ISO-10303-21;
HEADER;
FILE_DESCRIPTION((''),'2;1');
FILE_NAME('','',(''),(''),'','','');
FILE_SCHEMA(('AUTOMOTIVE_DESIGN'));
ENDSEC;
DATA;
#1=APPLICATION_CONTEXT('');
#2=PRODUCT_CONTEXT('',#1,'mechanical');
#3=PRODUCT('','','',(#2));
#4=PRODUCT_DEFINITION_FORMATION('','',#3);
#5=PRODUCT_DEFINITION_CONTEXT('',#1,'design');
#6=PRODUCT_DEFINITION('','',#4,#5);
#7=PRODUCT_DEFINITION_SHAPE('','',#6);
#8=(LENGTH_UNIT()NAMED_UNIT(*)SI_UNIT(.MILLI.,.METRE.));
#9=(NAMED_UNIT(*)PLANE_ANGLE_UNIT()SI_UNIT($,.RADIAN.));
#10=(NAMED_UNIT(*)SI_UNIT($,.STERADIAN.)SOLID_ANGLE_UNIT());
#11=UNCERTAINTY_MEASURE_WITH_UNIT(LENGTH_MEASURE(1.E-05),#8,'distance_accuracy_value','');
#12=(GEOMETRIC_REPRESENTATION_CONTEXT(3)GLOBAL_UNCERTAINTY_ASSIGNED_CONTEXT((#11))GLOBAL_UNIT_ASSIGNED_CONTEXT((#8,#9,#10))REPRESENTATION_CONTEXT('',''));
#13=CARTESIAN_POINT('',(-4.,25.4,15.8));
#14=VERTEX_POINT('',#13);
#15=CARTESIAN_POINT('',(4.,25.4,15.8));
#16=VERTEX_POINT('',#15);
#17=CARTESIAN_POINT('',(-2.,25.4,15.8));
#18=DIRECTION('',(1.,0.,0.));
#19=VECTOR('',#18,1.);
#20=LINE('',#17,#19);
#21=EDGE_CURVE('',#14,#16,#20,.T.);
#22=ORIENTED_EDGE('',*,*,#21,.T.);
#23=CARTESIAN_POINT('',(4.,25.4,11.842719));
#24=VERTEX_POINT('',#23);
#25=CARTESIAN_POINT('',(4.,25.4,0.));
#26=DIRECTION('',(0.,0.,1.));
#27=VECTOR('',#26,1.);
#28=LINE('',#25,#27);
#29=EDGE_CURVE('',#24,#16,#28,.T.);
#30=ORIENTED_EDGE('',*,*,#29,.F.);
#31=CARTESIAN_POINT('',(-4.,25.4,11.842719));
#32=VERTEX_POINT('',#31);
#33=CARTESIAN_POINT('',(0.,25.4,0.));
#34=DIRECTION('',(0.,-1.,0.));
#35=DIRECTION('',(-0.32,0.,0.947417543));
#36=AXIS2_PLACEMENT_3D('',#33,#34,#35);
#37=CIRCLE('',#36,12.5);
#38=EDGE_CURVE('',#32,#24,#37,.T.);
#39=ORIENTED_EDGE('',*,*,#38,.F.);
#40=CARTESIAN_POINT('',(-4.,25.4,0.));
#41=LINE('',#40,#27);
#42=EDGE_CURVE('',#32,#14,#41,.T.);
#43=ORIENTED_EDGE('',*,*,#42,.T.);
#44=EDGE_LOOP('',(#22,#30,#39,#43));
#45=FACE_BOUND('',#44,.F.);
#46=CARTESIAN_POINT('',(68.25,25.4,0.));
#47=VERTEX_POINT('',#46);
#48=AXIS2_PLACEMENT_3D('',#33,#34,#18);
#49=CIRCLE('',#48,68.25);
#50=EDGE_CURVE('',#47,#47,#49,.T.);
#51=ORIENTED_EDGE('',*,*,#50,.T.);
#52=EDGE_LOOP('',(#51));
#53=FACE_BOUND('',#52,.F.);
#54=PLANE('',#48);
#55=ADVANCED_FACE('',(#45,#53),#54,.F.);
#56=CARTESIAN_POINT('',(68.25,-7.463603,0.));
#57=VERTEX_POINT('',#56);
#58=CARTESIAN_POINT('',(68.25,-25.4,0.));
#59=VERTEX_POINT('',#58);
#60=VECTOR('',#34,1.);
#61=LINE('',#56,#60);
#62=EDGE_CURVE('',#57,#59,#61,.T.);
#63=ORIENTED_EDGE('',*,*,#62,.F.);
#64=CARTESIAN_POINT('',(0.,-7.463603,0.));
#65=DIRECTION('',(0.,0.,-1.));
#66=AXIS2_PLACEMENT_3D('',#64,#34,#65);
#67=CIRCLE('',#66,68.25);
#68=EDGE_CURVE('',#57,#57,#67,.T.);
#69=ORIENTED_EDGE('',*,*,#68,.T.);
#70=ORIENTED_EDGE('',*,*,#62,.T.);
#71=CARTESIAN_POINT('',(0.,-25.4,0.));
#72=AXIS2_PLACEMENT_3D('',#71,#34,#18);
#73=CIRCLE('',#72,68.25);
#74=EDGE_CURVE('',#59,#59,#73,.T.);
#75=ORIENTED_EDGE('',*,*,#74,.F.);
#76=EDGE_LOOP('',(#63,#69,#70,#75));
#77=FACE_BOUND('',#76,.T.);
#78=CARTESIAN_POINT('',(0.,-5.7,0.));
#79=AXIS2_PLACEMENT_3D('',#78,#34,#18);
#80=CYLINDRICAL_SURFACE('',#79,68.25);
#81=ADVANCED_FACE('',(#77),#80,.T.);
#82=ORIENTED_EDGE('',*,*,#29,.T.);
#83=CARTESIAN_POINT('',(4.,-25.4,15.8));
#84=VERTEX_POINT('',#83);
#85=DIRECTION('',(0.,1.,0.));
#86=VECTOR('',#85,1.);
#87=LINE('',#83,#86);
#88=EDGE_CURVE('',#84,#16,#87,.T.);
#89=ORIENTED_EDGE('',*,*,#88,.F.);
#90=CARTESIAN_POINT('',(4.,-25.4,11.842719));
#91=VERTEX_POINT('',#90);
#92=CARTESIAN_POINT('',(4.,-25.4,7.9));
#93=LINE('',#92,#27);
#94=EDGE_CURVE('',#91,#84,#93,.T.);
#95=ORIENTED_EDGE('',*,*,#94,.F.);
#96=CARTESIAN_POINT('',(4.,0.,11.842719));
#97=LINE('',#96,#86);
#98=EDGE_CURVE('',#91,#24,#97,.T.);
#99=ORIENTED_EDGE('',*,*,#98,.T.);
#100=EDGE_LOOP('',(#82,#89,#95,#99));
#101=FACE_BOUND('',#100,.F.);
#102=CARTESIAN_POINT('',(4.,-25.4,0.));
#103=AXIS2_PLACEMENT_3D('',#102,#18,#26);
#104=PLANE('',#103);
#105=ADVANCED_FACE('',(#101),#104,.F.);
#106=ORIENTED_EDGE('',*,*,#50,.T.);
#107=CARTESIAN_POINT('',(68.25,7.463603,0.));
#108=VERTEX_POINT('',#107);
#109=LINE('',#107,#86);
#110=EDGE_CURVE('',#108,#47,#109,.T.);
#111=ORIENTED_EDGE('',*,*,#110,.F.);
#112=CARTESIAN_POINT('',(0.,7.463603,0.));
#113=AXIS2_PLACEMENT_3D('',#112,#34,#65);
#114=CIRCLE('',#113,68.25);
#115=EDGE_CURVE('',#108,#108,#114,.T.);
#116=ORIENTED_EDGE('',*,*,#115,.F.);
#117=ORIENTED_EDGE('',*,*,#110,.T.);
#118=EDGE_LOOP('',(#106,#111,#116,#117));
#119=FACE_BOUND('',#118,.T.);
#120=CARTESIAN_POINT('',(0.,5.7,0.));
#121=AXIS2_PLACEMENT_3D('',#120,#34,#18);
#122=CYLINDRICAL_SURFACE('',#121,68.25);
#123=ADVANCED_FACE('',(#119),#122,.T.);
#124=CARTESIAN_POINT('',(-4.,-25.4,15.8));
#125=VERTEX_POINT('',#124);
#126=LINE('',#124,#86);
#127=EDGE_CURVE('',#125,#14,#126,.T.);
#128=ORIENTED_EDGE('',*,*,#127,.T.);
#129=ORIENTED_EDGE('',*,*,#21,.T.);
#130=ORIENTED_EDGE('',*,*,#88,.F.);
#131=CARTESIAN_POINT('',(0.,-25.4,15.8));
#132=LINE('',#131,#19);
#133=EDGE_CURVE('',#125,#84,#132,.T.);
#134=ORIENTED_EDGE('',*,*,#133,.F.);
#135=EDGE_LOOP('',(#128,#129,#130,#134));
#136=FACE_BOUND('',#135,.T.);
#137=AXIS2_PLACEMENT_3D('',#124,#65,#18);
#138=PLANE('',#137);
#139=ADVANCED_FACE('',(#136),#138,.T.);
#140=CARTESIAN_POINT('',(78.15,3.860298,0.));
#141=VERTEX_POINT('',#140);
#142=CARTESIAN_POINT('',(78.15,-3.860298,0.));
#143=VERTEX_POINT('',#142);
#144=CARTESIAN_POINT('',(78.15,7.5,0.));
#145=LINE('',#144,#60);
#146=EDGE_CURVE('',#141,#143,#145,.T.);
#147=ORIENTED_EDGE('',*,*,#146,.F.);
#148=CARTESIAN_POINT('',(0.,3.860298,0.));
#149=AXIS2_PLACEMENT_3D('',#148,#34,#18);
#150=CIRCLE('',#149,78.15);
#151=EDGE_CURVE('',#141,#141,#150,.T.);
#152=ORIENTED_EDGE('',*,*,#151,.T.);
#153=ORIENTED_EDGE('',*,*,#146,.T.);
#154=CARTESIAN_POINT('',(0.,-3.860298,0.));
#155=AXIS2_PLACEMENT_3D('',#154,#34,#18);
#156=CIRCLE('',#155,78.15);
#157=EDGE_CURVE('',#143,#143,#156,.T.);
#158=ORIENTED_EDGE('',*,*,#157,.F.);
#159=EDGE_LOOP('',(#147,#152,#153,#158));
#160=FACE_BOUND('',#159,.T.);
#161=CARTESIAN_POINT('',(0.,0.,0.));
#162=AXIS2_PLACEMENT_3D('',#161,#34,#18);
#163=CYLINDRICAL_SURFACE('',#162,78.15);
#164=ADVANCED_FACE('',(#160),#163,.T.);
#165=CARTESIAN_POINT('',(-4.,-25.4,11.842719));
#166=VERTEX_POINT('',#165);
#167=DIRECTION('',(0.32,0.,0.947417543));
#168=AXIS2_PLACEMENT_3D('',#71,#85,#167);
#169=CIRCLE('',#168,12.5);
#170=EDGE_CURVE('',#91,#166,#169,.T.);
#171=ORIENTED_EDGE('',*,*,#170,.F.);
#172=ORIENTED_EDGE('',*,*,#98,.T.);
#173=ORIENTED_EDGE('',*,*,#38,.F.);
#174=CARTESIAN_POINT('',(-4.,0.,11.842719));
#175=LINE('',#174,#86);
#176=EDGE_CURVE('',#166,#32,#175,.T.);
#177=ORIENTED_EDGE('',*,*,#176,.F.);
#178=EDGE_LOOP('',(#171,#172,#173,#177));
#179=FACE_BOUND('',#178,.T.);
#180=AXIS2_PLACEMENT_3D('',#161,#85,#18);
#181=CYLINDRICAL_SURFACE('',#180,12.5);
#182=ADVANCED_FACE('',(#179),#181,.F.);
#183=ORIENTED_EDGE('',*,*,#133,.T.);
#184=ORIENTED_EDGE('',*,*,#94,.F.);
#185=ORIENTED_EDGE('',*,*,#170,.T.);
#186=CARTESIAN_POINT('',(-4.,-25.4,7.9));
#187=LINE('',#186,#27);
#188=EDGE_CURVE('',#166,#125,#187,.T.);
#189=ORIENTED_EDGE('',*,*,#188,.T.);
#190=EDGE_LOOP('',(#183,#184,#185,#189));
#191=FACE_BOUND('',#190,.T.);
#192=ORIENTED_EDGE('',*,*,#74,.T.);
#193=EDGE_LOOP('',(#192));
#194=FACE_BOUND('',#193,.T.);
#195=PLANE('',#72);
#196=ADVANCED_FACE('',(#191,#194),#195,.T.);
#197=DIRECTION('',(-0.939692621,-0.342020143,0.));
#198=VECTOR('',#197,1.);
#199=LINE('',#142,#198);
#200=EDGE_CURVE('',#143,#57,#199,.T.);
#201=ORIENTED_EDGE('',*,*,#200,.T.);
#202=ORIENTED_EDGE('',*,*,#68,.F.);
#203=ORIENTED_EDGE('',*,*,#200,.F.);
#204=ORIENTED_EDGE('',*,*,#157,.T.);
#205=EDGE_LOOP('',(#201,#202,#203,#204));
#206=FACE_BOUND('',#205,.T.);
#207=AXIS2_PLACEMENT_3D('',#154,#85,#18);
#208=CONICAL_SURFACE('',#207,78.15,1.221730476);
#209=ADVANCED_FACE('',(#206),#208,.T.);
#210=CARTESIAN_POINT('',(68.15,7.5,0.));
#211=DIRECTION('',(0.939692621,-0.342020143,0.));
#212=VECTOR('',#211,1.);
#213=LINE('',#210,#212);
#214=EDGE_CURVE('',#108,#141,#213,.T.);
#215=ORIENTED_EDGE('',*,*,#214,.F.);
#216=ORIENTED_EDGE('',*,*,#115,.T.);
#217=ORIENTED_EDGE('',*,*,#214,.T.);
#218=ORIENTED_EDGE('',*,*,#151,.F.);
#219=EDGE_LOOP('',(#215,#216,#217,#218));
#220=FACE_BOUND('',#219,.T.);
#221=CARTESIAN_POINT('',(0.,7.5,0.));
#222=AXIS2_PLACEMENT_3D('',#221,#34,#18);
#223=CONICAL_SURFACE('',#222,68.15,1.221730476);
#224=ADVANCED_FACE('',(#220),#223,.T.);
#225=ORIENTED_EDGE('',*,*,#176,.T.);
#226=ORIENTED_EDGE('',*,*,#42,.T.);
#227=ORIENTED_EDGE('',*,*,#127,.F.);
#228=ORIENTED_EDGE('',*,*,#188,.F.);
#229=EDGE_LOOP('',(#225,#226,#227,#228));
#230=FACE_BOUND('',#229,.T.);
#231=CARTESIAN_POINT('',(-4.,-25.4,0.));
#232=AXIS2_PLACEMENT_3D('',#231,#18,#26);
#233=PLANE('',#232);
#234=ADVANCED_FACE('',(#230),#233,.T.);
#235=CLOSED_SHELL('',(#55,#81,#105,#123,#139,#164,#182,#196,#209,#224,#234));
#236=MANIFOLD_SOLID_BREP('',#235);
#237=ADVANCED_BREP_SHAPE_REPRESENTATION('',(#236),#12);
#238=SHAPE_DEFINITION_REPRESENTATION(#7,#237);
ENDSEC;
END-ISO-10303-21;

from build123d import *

# Parameters (mm, degrees)
F0_R         = 68.25
F0_R_2       = 12.5
F1_DEPTH     = 25.4
F2_W         = 8
F2_H         = 15.8
F3_DEPTH     = 50.801
F4_R         = 78.15
F4_R_2       = 20
F5_DEPTH     = 7.5
F6_S5_R      = 68.25
F6_T6_DEPTH  = 112
F6_S11_R     = 68.25
F6_T12_DEPTH = 112


# Not quite as in the source:
# - a fillet or chamfer that OpenCascade refuses, or shapes differently, is made with other operations: its cross-section is extruded or revolved along the edge and cut away or added


with BuildPart() as f1:
    # F0 (on Front) → F1 (new body, symmetric)
    with BuildSketch(Plane.XZ):
        Circle(F0_R)
        Circle(F0_R_2, mode=Mode.SUBTRACT)
    extrude(amount=F1_DEPTH, both=True)

    # F2 (on face) → F3 (cut, through all)
    with BuildSketch(Plane.XZ.offset(25.4)):
        with Locations((0, 7.9)):
            Rectangle(F2_W, F2_H)
    extrude(amount=-F3_DEPTH, mode=Mode.SUBTRACT)

    # F4 (on Front) → F5 (join, symmetric)
    with BuildSketch(Plane.XZ):
        Circle(F4_R)
        Circle(F4_R_2, mode=Mode.SUBTRACT)
    extrude(amount=F5_DEPTH, both=True)

    # F6: chamfer of 10 x 3.6397023427 on 2 edges, made by hand


with BuildPart() as f6_tool2:
    # F6_s3 → F6_t4 (revolve)
    with BuildSketch(Plane.XY):
        Polygon((78.15, -3.8602976573), (68.15, -7.5), (78.15, -7.5), align=None)
    revolve(axis=Axis((0, -7.5, 0), (0, -1, 0)))

    # F6_s5 → F6_t6 (cut, symmetric)
    with BuildSketch(Plane.XZ.offset(5.7)):
        Circle(F6_S5_R)
    extrude(amount=F6_T6_DEPTH, both=True, mode=Mode.SUBTRACT)


with BuildPart() as f1_1:
    add(f1.part)

    # F6_t1: cut F6_tool2
    add(f6_tool2.part, mode=Mode.SUBTRACT)


with BuildPart() as f6_tool8:
    # F6_s9 → F6_t10 (revolve)
    with BuildSketch(Plane.XY):
        Polygon((68.15, 7.5), (78.15, 3.8602976573), (78.15, 7.5), align=None)
    revolve(axis=Axis((0, 7.5, 0), (0, -1, 0)))

    # F6_s11 → F6_t12 (cut, symmetric)
    with BuildSketch(Plane.XZ.offset(-5.7)):
        Circle(F6_S11_R)
    extrude(amount=F6_T12_DEPTH, both=True, mode=Mode.SUBTRACT)


with BuildPart() as f1_2:
    add(f1_1.part)

    # F6_t7: cut F6_tool8
    add(f6_tool8.part, mode=Mode.SUBTRACT)


solid = f1_2.part
